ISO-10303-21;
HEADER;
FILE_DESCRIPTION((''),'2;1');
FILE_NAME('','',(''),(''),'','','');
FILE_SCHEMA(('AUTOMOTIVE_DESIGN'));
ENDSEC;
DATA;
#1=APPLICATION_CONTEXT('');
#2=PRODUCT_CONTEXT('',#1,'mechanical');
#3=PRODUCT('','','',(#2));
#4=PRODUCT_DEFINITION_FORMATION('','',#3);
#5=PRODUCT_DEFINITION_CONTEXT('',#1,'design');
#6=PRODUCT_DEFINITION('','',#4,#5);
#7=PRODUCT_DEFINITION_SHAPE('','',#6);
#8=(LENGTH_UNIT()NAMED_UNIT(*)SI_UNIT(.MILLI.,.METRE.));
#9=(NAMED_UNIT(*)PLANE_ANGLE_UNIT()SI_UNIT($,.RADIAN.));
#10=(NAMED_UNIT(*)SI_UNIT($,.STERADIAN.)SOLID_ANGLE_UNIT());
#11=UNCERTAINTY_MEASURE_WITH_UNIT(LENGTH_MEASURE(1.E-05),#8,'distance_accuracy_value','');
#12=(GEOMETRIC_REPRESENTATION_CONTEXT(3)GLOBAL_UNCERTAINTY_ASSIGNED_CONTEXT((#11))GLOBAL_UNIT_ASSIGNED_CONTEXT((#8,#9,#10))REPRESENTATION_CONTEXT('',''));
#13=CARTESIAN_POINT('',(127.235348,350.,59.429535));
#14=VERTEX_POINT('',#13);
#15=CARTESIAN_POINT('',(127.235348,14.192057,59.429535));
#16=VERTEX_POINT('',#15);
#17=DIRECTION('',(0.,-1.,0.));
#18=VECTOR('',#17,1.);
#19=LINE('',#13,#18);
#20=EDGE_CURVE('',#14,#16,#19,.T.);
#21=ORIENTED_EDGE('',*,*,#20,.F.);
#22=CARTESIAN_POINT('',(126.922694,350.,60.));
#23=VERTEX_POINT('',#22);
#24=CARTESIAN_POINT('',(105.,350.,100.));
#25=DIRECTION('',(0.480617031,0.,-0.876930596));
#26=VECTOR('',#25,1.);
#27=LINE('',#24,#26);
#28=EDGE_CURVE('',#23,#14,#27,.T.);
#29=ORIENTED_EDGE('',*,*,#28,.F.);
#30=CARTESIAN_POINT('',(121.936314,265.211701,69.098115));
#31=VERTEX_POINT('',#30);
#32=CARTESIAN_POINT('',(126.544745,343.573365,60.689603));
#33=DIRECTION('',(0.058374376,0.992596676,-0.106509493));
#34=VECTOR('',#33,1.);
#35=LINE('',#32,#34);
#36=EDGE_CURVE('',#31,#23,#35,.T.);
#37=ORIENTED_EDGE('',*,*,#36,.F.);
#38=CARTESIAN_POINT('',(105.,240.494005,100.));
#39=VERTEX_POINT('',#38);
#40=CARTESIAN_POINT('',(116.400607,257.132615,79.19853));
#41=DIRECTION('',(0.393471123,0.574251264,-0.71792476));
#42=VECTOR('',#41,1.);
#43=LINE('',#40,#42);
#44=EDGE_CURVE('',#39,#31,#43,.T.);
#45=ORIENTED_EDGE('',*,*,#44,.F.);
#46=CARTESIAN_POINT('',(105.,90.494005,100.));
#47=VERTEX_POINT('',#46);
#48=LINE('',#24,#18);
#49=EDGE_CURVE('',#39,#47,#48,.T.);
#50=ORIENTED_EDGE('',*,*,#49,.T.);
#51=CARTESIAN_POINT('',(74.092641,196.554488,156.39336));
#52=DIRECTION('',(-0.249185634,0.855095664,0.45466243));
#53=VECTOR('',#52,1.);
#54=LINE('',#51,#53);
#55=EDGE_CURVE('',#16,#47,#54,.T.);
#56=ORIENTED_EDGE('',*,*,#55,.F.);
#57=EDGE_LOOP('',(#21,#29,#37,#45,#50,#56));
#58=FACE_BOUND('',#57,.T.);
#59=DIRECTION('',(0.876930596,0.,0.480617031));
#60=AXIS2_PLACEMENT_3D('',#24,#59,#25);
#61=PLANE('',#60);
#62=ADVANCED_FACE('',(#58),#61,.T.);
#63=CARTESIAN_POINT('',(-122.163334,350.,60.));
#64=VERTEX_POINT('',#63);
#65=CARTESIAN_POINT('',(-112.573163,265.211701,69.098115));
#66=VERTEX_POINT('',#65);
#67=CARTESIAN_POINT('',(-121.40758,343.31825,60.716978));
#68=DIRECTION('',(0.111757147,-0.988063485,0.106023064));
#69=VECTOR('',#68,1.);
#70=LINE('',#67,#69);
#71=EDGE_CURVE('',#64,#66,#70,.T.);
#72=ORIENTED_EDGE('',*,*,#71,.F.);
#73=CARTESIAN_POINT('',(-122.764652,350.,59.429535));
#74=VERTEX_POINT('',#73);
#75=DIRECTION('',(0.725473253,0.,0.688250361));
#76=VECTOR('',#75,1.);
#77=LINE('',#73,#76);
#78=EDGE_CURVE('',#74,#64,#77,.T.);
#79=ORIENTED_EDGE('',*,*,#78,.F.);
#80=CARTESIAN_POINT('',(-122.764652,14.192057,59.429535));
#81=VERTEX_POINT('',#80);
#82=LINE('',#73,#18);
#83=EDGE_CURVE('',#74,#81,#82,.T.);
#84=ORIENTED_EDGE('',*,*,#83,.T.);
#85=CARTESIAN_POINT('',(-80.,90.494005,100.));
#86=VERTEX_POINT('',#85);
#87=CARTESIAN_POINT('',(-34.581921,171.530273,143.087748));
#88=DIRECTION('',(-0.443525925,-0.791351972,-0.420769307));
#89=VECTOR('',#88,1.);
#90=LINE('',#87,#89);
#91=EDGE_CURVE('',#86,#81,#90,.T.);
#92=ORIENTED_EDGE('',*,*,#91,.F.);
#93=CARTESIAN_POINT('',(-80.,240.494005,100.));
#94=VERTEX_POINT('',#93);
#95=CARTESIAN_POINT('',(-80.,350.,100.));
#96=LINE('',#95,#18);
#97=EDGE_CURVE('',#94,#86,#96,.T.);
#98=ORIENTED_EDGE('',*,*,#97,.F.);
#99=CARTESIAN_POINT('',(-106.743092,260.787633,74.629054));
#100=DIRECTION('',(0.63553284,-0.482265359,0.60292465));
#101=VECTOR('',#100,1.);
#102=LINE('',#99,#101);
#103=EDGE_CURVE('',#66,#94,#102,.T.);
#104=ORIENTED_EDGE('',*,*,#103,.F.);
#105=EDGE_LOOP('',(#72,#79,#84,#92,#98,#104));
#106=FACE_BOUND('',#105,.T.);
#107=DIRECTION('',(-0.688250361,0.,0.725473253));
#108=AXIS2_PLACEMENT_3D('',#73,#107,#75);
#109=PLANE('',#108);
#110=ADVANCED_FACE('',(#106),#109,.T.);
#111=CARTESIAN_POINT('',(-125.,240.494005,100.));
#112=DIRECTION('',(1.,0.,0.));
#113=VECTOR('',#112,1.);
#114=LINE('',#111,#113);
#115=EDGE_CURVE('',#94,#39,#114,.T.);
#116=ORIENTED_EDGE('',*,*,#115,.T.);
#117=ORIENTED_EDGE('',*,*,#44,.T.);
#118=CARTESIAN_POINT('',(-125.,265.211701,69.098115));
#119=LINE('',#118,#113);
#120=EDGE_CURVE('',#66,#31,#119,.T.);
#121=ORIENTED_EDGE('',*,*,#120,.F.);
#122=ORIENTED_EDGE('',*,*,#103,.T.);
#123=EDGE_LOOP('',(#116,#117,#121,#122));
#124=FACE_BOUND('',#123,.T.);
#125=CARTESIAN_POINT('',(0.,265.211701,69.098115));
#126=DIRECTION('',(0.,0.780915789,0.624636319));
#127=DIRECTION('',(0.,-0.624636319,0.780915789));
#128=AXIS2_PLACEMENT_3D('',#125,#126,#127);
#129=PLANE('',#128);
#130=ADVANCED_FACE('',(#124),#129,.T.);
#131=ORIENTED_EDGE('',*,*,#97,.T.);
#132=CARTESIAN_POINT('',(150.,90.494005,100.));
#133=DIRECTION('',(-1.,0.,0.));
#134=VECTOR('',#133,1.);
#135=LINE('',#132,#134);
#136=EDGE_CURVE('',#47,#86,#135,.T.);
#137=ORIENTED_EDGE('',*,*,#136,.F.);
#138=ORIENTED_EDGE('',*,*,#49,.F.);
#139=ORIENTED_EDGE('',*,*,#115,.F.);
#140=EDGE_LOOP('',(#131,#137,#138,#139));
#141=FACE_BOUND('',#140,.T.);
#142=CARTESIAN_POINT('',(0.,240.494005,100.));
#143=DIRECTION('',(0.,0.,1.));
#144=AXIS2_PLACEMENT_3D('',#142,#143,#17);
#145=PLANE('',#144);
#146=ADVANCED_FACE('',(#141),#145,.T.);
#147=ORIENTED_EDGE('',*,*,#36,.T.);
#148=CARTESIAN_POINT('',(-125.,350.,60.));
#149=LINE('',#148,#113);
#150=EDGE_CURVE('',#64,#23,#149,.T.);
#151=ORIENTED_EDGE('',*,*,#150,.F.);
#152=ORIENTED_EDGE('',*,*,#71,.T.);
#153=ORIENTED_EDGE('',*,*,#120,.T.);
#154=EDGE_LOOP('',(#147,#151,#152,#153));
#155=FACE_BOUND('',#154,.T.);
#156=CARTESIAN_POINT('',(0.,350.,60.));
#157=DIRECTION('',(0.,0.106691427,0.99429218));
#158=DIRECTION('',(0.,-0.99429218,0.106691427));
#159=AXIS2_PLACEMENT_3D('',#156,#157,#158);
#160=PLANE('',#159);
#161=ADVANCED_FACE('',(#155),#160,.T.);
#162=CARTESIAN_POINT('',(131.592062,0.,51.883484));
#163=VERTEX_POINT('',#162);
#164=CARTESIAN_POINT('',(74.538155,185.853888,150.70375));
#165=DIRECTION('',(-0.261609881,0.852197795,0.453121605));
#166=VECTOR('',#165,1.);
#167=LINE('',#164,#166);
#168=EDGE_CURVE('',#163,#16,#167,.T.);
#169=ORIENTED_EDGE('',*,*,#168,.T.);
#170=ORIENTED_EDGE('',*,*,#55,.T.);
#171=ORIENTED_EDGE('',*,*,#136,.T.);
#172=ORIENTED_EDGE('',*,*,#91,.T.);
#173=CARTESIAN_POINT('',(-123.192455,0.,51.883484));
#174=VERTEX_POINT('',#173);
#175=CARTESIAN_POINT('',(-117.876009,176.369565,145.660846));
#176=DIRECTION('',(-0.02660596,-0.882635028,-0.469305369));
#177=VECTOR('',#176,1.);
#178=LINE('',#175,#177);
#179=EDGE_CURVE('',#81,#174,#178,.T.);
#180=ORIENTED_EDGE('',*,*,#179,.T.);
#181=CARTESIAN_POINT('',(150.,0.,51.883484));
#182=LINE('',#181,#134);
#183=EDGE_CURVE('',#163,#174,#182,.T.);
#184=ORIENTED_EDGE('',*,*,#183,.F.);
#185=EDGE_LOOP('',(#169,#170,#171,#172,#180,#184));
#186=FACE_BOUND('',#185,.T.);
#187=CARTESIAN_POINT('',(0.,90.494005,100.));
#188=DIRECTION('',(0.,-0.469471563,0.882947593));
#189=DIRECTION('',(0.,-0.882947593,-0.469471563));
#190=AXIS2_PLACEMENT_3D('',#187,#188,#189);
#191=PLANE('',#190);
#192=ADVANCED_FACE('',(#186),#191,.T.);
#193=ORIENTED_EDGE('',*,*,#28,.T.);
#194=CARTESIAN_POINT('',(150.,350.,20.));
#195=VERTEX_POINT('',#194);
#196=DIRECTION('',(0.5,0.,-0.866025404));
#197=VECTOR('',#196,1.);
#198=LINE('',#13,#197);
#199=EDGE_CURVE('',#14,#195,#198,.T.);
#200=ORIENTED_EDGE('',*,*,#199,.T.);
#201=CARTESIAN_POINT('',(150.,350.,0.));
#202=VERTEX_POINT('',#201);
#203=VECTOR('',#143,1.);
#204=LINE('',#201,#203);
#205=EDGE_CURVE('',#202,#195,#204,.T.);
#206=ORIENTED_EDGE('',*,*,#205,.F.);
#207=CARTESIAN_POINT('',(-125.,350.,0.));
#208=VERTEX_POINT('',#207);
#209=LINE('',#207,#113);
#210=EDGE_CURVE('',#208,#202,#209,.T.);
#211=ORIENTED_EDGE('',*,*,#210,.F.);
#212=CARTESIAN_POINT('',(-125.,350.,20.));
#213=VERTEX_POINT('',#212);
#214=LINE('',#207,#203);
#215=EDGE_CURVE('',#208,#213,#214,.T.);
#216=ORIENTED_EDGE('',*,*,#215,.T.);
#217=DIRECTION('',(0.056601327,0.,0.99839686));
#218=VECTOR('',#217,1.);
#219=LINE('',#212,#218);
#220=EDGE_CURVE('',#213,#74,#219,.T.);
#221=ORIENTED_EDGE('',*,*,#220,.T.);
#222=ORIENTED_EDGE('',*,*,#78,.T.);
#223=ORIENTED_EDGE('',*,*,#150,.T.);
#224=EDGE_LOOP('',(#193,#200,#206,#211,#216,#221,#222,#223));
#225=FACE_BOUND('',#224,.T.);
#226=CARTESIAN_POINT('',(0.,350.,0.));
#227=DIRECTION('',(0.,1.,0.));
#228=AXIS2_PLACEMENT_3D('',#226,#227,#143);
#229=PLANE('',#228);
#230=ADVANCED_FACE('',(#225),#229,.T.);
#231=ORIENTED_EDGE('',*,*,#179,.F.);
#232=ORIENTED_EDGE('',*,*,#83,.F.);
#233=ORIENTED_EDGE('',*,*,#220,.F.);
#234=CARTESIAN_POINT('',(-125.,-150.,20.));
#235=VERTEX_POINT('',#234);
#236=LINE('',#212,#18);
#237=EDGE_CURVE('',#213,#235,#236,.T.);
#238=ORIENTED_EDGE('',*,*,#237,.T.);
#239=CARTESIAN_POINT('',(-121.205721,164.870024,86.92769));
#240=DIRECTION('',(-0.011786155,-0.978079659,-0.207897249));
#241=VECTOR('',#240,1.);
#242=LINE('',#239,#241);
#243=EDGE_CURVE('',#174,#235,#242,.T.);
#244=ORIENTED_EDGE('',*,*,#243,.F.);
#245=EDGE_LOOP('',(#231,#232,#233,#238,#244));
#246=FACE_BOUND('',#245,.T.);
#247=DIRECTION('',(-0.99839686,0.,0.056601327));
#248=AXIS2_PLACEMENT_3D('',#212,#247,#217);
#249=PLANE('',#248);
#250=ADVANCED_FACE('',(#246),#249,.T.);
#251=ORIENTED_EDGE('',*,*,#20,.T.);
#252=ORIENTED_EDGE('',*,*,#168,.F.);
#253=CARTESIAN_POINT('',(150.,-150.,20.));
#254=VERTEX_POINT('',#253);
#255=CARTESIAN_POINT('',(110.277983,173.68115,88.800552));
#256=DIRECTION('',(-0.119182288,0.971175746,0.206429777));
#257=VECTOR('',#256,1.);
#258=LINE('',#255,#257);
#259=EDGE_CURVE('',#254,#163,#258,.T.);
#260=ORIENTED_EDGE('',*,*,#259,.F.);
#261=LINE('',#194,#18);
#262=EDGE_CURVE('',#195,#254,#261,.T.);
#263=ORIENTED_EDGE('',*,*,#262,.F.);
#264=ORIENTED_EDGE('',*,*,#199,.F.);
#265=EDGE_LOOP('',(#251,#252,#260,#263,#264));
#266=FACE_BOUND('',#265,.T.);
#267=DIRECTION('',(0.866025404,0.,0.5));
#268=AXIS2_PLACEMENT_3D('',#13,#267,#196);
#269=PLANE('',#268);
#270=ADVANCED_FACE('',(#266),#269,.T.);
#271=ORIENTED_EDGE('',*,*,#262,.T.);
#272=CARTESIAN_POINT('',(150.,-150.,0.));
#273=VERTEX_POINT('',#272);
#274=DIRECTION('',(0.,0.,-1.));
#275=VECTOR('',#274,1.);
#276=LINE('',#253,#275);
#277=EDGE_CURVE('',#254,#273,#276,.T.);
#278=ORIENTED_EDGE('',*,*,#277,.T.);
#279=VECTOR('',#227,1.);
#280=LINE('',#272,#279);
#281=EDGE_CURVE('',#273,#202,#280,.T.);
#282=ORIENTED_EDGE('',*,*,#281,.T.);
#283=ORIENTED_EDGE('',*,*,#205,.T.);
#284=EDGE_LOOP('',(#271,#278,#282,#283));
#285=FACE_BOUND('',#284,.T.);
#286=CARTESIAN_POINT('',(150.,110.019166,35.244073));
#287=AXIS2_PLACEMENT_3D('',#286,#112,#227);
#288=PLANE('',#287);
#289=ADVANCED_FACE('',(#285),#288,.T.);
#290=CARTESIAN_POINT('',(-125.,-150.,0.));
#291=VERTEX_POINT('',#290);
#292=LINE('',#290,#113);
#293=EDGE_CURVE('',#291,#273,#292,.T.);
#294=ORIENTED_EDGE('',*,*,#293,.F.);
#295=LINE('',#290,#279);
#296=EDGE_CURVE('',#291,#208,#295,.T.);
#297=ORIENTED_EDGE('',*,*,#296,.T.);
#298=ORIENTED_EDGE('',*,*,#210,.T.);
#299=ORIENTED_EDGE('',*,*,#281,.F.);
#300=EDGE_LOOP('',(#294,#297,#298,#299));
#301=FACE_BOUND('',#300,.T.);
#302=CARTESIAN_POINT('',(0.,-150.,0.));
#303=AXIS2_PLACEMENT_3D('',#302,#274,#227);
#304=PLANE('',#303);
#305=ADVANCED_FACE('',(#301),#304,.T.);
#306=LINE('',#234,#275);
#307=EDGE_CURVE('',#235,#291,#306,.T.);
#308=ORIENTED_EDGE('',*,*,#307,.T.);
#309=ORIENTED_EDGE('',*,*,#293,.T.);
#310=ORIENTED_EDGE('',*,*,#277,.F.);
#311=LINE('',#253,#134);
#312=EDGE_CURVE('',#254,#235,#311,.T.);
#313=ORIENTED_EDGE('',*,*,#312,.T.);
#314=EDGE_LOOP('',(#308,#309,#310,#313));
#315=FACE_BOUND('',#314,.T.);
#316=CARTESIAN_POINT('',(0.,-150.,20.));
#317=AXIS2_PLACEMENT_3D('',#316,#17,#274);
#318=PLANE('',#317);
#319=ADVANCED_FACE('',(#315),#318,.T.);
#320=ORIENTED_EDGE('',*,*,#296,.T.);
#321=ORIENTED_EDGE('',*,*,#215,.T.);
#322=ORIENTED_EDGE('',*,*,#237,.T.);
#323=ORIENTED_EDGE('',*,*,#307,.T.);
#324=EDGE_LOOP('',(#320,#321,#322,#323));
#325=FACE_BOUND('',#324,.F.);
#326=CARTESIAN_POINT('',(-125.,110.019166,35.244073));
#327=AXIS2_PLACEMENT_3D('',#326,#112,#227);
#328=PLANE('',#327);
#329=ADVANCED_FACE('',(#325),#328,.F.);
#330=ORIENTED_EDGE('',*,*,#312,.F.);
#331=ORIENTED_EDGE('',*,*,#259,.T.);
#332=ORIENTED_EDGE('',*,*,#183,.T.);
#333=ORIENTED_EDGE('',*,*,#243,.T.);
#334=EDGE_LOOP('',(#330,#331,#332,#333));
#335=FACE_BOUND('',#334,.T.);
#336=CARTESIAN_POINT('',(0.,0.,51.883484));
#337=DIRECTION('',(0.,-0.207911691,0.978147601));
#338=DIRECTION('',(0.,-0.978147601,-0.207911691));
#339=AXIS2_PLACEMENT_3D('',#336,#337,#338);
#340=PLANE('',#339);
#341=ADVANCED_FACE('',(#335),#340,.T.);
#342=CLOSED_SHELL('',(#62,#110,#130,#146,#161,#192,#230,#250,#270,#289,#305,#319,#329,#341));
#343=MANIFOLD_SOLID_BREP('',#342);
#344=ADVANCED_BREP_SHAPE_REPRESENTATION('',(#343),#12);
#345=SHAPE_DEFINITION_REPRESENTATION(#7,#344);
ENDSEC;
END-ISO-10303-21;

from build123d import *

# Parameters (mm, degrees)
F1_DEPTH      = 150
F1_DEPTH_BACK = 125
F3_DEPTH      = 2000


with BuildPart() as f1:
    # F0 (on Right) → F1 (new body, two sides)
    with BuildSketch(Plane.YZ) as f1_sk:
        Polygon((-150, 20), (-150, 0), (350, 0), (350, 60), (265.2117013931, 69.0981149673), (240.4940045903, 100), (90.4940045903, 100), (0, 51.8834842505), align=None)
    extrude(amount=F1_DEPTH)
    extrude(f1_sk.sketch, amount=-F1_DEPTH_BACK)

    # F2 (on face) → F3 (intersect)
    with BuildSketch(Plane(origin=(0, 350, 0), x_dir=(-1, 0, 0), z_dir=(0, 1, 0))):
        Polygon((122.7646524241, 59.4295346152), (80, 100), (-105, 100), (-127.2353475759, 59.4295346152), (-150, 20), (-150, 0), (125, 0), (125, 20), align=None)
    extrude(amount=-F3_DEPTH, mode=Mode.INTERSECT)


solid = f1.part
